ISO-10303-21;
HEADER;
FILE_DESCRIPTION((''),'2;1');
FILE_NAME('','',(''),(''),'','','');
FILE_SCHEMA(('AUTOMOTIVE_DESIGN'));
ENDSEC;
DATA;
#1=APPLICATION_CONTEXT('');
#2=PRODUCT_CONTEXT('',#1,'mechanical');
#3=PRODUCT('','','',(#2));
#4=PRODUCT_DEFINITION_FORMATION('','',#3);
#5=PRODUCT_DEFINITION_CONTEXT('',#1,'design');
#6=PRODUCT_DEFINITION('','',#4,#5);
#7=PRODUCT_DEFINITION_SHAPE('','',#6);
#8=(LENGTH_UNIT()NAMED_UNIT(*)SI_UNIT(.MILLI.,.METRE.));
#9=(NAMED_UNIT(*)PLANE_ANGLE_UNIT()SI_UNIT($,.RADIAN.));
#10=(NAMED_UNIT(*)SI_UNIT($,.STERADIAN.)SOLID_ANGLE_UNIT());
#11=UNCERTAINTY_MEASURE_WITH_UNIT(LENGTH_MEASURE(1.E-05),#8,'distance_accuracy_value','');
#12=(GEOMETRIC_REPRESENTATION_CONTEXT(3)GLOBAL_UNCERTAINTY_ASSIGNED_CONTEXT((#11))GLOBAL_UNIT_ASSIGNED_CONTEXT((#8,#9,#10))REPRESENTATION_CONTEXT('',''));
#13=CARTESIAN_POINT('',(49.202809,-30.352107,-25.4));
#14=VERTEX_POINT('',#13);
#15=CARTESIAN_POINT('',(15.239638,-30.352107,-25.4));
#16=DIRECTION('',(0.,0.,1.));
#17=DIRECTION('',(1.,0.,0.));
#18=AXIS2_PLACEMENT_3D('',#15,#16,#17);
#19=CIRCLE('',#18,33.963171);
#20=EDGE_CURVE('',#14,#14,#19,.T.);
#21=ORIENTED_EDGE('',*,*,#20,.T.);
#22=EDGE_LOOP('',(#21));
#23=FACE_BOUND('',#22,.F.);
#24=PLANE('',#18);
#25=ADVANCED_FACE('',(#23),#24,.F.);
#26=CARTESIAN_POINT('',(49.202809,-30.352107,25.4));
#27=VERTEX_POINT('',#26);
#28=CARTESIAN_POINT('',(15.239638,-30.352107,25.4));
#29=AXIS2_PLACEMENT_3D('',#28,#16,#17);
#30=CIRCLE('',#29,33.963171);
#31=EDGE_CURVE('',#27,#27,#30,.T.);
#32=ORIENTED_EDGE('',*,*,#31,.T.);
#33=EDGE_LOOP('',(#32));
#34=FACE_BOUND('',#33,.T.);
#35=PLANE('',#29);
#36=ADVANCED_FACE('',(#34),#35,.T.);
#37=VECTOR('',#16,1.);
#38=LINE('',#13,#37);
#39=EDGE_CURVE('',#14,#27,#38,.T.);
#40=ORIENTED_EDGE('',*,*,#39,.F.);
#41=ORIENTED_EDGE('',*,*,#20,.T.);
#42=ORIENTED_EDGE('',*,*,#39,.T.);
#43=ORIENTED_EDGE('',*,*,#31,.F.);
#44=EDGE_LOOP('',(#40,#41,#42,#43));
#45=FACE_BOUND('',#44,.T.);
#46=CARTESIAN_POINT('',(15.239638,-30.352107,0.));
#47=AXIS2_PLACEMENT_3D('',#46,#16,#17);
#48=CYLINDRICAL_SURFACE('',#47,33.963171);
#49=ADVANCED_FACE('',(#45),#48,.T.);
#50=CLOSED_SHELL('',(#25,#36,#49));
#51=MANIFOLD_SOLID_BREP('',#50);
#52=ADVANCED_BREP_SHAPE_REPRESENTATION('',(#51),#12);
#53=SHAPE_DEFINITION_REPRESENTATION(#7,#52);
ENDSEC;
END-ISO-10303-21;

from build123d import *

# Parameters (mm, degrees)
F0_R     = 33.9631705584
F0_R_2   = 22.1322753086
F1_DEPTH = 25.4


# Not quite as in the source:
# - the program builds the solid bodies; features that only make, move or delete a surface that nothing else refers to are left out


with BuildPart() as f1:
    # F0 (on Top) → F1 (new body, symmetric)
    with BuildSketch(Plane.XY):
        with Locations((15.2396384771, -30.3521065738)):
            Circle(F0_R)
        with Locations((15.2396384771, -30.3521065738)):
            Circle(F0_R_2, mode=Mode.SUBTRACT)
        with Locations((15.2396384771, -30.3521065738)):
            Circle(F0_R_2)
    extrude(amount=F1_DEPTH, both=True)


solid = f1.part
